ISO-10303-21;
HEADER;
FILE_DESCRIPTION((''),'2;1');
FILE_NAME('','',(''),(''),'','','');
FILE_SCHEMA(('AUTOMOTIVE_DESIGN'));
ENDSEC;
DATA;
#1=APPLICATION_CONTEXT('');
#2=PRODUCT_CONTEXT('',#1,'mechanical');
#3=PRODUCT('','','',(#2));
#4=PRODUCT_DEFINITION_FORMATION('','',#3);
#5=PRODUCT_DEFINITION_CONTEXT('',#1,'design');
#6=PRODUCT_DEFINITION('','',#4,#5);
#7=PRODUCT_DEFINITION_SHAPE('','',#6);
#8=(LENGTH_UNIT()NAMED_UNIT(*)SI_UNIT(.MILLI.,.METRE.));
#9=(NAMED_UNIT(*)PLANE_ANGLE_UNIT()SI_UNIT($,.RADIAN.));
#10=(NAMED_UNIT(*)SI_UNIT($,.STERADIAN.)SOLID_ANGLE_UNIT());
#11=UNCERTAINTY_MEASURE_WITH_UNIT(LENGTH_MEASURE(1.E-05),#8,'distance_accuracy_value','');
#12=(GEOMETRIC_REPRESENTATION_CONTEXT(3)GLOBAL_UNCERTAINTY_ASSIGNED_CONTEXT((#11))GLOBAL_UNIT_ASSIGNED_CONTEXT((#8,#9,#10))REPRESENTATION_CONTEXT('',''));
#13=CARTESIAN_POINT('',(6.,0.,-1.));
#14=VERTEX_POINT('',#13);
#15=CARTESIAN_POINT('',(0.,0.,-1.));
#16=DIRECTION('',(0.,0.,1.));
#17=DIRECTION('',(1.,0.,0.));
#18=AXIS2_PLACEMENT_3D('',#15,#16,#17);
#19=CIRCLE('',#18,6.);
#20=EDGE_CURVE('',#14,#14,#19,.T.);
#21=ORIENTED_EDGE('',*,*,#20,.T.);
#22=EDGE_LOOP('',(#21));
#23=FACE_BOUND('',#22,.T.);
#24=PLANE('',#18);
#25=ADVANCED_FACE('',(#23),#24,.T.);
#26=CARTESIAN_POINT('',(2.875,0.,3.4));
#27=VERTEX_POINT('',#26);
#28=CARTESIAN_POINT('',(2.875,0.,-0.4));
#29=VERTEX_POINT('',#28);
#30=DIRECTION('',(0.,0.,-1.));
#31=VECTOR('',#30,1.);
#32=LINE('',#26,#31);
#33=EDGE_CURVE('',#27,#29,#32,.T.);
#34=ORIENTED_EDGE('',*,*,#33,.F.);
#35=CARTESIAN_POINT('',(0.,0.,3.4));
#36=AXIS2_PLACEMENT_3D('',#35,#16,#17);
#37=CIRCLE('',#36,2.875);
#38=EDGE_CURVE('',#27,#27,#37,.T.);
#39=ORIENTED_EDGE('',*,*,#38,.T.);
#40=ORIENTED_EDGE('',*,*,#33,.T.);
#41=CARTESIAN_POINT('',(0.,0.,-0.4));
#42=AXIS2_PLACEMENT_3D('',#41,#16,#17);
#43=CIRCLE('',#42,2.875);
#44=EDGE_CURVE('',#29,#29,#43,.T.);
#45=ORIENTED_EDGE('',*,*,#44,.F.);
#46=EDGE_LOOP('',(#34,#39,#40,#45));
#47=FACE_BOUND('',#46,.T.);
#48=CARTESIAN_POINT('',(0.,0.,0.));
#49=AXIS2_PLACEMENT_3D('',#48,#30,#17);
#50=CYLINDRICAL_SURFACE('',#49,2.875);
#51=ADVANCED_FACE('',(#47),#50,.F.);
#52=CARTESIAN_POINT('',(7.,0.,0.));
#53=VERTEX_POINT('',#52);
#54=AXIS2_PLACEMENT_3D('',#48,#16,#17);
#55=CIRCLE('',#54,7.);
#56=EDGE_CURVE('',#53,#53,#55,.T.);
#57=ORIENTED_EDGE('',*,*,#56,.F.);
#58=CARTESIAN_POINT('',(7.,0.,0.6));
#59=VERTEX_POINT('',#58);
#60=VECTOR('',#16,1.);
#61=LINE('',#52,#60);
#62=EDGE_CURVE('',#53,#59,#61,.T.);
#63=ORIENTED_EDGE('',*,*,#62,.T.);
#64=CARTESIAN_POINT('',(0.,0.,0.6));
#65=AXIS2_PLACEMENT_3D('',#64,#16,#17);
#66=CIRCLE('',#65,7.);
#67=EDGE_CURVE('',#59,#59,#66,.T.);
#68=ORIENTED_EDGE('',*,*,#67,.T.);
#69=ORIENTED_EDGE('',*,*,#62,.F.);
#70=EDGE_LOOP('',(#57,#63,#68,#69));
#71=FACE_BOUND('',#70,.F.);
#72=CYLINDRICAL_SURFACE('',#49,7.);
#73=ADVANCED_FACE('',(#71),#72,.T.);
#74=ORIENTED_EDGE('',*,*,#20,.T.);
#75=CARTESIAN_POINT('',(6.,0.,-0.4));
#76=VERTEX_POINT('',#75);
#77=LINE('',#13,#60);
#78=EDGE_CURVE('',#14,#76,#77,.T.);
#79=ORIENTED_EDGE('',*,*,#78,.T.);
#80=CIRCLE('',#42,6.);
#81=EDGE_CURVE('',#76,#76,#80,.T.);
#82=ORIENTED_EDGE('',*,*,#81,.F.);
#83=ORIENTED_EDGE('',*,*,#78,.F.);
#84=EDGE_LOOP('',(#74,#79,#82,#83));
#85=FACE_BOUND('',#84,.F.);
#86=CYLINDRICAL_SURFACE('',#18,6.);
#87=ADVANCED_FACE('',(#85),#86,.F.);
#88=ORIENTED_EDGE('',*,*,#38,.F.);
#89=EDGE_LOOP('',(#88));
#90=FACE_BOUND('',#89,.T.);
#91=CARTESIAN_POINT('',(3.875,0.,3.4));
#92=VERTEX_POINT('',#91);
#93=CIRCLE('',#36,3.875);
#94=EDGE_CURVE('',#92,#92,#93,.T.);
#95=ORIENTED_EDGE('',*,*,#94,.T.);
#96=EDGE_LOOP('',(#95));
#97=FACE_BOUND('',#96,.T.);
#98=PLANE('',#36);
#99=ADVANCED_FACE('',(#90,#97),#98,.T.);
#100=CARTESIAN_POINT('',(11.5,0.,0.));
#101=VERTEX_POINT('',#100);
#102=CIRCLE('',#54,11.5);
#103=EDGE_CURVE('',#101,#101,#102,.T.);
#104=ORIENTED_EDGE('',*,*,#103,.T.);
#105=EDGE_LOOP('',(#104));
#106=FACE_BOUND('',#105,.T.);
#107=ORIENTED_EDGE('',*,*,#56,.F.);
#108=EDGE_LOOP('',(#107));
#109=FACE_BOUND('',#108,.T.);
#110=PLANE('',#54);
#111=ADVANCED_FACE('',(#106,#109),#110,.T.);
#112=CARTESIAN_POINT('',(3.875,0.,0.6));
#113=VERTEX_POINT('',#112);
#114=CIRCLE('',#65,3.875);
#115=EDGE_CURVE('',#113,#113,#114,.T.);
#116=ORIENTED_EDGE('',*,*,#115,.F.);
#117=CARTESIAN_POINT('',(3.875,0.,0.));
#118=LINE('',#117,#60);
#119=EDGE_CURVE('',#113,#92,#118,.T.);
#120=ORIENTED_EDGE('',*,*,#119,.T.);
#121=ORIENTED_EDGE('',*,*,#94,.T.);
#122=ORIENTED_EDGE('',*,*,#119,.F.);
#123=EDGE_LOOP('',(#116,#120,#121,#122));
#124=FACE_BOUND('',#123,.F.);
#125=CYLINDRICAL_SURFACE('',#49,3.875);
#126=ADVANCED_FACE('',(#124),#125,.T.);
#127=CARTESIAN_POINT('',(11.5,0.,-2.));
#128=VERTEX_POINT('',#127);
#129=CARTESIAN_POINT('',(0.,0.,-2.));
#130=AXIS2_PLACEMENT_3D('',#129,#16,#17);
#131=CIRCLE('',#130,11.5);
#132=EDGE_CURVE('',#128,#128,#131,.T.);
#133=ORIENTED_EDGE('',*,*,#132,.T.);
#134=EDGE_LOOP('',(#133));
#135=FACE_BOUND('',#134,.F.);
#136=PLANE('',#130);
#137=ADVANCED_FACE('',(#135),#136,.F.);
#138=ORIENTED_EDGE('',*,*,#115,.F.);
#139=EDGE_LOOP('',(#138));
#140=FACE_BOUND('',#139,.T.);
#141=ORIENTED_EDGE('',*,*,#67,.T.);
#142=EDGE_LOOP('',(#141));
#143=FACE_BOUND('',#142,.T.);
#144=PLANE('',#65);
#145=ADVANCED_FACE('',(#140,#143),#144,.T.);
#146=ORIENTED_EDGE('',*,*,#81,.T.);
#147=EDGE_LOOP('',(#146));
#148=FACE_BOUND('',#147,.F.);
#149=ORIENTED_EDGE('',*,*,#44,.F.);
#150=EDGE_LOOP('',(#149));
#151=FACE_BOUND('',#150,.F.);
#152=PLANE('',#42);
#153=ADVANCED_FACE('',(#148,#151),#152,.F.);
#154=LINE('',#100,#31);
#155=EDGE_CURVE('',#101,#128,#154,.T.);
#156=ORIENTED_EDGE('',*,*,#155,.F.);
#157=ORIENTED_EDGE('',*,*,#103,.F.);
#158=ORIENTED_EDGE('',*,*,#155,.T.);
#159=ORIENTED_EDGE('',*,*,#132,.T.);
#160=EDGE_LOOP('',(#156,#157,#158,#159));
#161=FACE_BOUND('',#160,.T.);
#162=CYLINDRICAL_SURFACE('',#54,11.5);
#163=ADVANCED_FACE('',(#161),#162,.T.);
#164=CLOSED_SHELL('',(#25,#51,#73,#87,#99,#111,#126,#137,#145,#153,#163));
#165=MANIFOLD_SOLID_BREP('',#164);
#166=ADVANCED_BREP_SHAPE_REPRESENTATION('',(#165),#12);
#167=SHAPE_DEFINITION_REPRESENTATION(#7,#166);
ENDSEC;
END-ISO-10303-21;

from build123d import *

# Parameters (mm, degrees)
F0_R     = 3.875
F1_DEPTH = 3.4
F0_R_2   = 7
F2_DEPTH = 0.6
F0_R_3   = 11.5
F3_DEPTH = 2
F4_T     = 1


# Not quite as in the source:
# - a shell that OpenCascade refuses in one call is made with other operations: the cavity is built on its own and cut out


with BuildPart() as f1:
    # F0 (on Top) → F1 (new body)
    with BuildSketch(Plane.XY):
        Circle(F0_R)
    extrude(amount=F1_DEPTH)

    # F0 (on Top) → F2 (join)
    with BuildSketch(Plane.XY):
        Circle(F0_R_2)
        Circle(F0_R, mode=Mode.SUBTRACT)
    extrude(amount=F2_DEPTH)

    # F0 (on Top) → F3 (join)
    with BuildSketch(Plane.XY):
        Circle(F0_R_3)
        Circle(F0_R_2, mode=Mode.SUBTRACT)
        Circle(F0_R_2)
        Circle(F0_R, mode=Mode.SUBTRACT)
        Circle(F0_R)
    extrude(amount=-F3_DEPTH)

    # F4: shell of thickness 1, made by hand


with BuildPart() as f4_core1:
    # F4_t2: copy of F1
    add(f1.part)

    # the walls: a layer under each face that stays
    f4_faces = [f4_core1.faces().sort_by_distance(p)[0] for p in [
        (-11.5, 0, -1),
        (-7.6666666667, -7.6666666667, 0),
        (0, 0, -2),
        (-7, 0, 0.3),
        (-4.6666666667, -4.6666666667, 0.6),
        (-3.875, 0, 2),
    ]]
    thicken(f4_faces, amount=-F4_T, mode=Mode.SUBTRACT)

    # F4_s3 → F4_t4 (revolve, cut)
    with BuildSketch(Plane.XZ):
        Polygon((7.01, 0.01), (7, -1), (6, -1), (6, 0), align=None)
    revolve(axis=Axis((0, 0, 0), (0, 0, 1)), mode=Mode.SUBTRACT)

    # F4_s5 → F4_t6 (revolve, cut)
    with BuildSketch(Plane.XZ):
        Polygon((3.885, 0.61), (3.875, -0.4), (2.875, -0.4), (2.875, 0.6), align=None)
    revolve(axis=Axis((0, 0, 0.6), (0, 0, 1)), mode=Mode.SUBTRACT)


with BuildPart() as f1_1:
    add(f1.part)

    # what is left inside the walls is the cavity
    f4_cavity = [f4_core1.part.solids().sort_by_distance(p)[0] for p in [
        (0, -2, -0.99),
    ]]
    add(f4_cavity, mode=Mode.SUBTRACT)


solid = f1_1.part
